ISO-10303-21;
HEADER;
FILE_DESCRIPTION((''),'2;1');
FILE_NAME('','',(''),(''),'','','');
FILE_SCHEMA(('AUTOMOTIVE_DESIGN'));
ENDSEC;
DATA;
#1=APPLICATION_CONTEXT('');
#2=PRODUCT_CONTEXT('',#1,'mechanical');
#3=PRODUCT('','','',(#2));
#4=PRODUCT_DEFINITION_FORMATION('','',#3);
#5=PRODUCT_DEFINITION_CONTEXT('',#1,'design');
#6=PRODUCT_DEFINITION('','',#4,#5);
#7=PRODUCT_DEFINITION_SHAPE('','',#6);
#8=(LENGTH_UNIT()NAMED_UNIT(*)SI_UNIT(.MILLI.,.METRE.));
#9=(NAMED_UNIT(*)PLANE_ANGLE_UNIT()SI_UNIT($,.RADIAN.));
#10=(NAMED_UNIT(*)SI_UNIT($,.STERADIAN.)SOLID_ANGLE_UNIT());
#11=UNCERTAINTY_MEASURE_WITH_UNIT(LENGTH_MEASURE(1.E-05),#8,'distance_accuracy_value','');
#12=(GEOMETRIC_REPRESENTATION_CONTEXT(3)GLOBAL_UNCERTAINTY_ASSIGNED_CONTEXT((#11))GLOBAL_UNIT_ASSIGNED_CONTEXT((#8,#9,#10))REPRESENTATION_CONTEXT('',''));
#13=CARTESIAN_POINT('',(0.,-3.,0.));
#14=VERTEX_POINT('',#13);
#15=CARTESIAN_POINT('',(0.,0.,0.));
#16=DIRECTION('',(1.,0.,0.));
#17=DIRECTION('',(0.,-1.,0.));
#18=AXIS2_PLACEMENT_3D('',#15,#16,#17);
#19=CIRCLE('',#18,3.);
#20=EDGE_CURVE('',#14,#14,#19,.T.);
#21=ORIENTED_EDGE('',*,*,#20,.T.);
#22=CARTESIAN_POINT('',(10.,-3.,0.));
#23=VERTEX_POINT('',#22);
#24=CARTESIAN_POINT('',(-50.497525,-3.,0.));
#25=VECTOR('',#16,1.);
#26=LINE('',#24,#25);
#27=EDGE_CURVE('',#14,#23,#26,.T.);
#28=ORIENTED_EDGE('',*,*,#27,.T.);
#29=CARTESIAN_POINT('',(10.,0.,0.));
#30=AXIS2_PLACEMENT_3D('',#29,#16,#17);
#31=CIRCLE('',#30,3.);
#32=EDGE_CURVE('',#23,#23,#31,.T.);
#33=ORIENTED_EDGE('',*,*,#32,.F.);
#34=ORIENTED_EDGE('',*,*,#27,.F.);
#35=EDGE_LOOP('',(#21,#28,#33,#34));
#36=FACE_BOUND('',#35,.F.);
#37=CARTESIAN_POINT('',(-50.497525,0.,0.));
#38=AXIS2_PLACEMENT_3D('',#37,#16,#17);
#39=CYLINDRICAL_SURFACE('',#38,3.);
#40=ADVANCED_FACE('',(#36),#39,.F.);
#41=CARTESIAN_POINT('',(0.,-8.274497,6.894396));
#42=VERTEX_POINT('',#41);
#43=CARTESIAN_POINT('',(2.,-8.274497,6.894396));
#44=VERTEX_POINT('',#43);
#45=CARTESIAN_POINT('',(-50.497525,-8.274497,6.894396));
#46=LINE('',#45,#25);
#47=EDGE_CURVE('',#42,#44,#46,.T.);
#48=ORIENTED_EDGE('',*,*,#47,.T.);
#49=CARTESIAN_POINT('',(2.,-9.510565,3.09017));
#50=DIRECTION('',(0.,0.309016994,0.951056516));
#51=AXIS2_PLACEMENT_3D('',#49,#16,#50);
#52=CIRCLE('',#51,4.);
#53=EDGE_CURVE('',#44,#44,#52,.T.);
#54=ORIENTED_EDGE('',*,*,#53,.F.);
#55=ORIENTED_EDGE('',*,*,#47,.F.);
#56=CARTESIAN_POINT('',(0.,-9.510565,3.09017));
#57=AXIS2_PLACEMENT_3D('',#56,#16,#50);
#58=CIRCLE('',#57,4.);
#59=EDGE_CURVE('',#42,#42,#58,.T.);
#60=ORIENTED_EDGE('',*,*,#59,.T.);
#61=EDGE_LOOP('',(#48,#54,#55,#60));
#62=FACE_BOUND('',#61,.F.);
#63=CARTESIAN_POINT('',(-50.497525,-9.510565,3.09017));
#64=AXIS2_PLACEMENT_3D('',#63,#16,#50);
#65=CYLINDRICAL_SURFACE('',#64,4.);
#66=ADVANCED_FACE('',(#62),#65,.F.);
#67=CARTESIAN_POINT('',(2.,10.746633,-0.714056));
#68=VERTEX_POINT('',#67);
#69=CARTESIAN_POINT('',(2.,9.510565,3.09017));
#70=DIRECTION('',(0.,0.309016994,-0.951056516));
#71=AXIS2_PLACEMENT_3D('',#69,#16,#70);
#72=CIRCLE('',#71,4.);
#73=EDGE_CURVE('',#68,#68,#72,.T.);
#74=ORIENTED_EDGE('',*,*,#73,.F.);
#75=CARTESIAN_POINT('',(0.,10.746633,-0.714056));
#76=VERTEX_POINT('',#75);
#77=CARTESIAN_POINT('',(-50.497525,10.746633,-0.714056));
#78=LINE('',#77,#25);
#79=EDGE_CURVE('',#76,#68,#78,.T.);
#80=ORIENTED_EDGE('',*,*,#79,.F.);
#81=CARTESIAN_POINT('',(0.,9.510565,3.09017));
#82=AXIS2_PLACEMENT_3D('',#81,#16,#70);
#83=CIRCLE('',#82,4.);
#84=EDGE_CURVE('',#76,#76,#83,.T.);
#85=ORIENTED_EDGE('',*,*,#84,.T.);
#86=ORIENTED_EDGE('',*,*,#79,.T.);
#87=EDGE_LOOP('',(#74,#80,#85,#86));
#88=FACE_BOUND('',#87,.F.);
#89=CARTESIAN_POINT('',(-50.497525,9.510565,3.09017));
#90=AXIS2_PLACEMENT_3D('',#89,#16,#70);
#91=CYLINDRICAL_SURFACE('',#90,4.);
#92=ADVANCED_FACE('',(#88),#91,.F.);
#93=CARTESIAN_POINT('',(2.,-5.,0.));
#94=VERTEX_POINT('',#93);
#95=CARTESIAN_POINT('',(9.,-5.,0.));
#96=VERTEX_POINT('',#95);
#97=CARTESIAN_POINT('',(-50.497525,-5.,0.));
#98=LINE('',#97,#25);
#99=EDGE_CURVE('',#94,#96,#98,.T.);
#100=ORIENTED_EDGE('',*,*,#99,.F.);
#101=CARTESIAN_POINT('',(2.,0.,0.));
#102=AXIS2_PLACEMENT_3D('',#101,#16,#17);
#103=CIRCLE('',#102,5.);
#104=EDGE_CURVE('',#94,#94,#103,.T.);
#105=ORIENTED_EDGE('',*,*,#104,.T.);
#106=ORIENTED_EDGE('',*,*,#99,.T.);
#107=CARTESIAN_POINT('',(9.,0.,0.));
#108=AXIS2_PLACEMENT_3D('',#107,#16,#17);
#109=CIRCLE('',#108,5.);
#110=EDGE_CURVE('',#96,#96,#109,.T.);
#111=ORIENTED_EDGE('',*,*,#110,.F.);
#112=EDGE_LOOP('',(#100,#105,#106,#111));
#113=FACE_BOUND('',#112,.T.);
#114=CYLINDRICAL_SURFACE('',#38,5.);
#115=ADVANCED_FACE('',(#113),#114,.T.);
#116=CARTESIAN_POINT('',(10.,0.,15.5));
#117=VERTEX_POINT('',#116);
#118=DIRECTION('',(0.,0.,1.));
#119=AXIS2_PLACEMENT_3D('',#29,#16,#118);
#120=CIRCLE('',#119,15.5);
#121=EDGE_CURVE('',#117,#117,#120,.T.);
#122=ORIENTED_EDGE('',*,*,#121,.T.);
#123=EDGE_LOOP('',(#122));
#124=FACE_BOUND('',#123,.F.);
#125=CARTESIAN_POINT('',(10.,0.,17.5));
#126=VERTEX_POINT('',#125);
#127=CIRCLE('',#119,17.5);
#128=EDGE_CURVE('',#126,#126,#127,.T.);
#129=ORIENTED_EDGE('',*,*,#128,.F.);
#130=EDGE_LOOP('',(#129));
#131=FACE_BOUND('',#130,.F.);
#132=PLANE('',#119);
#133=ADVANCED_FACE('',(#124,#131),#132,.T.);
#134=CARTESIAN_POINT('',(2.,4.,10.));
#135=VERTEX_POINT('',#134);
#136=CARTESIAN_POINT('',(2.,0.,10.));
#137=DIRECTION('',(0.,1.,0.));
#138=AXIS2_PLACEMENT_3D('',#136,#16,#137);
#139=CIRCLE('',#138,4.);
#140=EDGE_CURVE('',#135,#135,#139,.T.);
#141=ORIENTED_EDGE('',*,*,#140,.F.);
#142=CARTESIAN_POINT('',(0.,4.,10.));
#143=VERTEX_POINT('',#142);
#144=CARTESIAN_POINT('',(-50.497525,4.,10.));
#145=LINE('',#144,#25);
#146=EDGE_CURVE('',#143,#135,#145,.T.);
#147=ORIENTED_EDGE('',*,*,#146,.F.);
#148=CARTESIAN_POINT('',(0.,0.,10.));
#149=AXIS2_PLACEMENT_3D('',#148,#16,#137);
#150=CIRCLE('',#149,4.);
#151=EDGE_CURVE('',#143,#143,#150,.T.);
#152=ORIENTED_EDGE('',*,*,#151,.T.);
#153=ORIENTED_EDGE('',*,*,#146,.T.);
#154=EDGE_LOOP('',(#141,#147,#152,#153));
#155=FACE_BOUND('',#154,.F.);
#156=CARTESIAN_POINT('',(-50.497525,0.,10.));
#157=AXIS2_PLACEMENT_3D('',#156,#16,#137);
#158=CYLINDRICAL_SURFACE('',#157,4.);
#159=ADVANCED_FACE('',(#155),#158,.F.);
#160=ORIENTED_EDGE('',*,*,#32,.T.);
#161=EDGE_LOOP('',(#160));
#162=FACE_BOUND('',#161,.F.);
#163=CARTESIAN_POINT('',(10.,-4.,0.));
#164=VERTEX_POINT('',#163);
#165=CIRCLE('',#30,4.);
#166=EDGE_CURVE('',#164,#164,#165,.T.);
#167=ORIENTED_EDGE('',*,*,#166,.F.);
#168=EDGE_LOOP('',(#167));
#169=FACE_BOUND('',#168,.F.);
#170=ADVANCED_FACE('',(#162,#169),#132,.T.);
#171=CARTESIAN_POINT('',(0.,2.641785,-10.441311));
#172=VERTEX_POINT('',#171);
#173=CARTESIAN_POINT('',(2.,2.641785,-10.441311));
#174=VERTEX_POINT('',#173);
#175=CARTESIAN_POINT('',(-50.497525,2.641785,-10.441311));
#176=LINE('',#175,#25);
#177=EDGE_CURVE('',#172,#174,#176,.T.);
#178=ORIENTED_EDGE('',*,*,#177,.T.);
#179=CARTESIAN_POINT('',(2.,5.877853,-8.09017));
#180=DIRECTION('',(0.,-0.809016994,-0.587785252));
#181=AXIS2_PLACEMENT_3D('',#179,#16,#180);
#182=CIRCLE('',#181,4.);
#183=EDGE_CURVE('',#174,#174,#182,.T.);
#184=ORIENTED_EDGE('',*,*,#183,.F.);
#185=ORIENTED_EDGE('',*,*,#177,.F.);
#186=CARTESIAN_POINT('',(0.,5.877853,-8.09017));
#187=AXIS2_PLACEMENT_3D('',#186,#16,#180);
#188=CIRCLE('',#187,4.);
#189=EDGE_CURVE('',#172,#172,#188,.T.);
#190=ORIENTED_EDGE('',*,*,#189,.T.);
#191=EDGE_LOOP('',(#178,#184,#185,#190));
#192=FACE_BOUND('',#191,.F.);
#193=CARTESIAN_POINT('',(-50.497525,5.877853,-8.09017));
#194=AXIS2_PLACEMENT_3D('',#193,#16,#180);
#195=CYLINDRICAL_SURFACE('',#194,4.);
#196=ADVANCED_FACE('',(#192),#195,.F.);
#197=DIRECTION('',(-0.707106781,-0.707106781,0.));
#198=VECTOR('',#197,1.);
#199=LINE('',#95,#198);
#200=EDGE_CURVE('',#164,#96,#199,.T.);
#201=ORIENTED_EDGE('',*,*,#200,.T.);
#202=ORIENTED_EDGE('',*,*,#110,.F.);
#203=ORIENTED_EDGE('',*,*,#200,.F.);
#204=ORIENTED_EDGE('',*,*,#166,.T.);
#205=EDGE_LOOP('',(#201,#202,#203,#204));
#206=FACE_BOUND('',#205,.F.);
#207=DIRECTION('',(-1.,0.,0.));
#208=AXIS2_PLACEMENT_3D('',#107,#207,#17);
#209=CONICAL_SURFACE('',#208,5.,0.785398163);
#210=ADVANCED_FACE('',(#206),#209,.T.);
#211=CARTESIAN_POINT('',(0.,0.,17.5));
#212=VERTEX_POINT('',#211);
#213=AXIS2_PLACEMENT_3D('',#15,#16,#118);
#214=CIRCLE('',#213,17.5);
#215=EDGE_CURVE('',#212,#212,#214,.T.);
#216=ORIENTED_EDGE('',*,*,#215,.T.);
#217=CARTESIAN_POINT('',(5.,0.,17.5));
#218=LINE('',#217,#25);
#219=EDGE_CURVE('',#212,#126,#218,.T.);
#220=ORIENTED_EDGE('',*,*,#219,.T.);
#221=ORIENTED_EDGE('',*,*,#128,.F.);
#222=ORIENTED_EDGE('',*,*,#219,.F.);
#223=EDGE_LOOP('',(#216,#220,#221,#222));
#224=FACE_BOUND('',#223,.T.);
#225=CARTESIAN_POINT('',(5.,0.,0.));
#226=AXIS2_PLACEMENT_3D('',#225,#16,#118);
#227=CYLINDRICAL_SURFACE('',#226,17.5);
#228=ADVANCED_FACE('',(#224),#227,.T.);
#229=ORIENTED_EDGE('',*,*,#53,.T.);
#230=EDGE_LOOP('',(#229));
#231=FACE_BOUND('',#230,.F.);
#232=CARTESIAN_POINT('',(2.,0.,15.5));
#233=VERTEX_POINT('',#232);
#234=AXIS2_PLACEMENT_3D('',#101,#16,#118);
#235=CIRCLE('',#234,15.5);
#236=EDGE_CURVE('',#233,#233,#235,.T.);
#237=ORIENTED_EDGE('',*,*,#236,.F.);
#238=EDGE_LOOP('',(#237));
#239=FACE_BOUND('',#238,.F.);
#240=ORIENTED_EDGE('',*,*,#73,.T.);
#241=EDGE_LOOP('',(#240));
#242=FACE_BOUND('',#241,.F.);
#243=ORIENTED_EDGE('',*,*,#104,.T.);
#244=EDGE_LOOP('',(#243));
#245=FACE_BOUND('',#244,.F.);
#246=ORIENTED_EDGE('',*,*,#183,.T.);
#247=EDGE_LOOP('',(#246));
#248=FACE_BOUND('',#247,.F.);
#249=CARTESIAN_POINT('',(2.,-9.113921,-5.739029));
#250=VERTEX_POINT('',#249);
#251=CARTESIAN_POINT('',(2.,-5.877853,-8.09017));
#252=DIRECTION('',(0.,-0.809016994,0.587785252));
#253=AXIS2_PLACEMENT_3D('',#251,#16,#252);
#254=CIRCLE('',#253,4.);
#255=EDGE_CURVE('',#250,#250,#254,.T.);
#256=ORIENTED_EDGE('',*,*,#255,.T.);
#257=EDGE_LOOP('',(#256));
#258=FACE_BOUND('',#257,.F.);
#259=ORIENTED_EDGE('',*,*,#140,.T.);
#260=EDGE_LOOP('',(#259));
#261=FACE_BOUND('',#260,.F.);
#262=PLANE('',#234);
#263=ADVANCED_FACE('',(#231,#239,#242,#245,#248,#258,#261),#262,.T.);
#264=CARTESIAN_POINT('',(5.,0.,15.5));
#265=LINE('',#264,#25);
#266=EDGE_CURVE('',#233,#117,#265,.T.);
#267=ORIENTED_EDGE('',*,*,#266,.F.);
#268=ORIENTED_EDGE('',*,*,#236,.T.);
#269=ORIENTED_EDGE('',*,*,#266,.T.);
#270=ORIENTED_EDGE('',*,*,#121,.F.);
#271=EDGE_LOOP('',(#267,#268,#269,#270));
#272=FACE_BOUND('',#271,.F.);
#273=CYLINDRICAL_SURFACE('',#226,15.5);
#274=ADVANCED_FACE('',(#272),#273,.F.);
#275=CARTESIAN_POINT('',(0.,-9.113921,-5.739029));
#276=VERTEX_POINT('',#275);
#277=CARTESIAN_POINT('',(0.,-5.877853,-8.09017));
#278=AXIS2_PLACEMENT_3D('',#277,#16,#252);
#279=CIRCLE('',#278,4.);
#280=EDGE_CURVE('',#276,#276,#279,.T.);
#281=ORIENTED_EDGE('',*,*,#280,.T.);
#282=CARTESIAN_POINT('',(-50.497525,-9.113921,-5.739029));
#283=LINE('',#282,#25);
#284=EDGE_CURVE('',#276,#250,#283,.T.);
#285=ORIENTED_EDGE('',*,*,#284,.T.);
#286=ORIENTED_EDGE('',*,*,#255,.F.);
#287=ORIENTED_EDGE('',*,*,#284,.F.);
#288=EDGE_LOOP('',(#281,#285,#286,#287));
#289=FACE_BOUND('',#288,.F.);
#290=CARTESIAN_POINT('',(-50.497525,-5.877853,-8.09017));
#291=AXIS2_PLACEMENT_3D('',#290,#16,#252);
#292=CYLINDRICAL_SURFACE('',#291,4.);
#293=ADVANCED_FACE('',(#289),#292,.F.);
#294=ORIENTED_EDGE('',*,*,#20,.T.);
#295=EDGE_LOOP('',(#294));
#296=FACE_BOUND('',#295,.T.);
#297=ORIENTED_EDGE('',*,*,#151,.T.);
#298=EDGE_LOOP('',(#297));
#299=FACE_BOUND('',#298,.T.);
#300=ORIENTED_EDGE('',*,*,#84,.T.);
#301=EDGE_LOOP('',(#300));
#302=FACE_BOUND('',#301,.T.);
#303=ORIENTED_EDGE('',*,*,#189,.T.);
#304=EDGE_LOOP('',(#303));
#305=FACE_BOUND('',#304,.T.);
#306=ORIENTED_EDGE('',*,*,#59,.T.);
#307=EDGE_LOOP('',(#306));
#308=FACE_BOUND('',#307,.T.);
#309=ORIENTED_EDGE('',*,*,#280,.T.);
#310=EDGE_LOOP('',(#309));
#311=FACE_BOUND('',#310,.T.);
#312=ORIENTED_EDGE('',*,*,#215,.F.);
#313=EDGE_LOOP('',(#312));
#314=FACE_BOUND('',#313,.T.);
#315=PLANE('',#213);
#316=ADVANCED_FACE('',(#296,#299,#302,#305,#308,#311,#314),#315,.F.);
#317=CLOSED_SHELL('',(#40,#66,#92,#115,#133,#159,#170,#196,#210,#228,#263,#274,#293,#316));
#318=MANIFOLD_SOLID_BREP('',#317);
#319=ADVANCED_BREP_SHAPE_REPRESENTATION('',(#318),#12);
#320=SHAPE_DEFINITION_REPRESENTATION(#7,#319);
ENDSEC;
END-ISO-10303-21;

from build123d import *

# Parameters (mm, degrees)
F0_W            = 10
F0_H            = 17.5
F3_D            = 6
F4_T            = -2
F6_D            = 8
F6_COPIES_COUNT = 5
F7_SIZE         = 1


# Not quite as in the source:
# - a pattern or mirror of a feature is missing from the dataset's text; its kind, count and spacing are read off the source's solid


with BuildPart() as f1:
    # F0 (on Front) → F1 (revolve)
    with BuildSketch(Plane.XZ):
        with Locations((5, 8.75)):
            Rectangle(F0_W, F0_H)
    revolve(axis=Axis((5, 0, 0), (1, 0, 0)))

    # F3 (through all)
    with Locations(Plane(origin=(0, 0, 0), x_dir=(0, 1, 0), z_dir=(-1, 0, 0))):
        with Locations((0, 0)):
            Hole(F3_D / 2)

    # F4
    f4_openings = [f1.faces().sort_by_distance(p)[0] for p in [
        (10, 0, -17.005025),
    ]]
    offset(amount=F4_T, openings=f4_openings)

    # F6 (through all)
    with Locations(Plane(origin=(0, 0, 0), x_dir=(0, -1, 0), z_dir=(-1, 0, 0))):
        with Locations((0, 10)):
            f6 = Hole(F6_D / 2)

    # F6_copies: F6 ×5 about axis
    f6_copies_axis = Axis((0, 0, 0), (1, 0, 0))
    for i in range(1, F6_COPIES_COUNT):
        add(f6.rotate(f6_copies_axis, i * 360 / F6_COPIES_COUNT), mode=Mode.SUBTRACT)

    # F7
    f7_edges = [f1.edges().sort_by_distance(p)[0] for p in [
        (10, -5, 0),
    ]]
    chamfer(f7_edges, length=F7_SIZE)


solid = f1.part
